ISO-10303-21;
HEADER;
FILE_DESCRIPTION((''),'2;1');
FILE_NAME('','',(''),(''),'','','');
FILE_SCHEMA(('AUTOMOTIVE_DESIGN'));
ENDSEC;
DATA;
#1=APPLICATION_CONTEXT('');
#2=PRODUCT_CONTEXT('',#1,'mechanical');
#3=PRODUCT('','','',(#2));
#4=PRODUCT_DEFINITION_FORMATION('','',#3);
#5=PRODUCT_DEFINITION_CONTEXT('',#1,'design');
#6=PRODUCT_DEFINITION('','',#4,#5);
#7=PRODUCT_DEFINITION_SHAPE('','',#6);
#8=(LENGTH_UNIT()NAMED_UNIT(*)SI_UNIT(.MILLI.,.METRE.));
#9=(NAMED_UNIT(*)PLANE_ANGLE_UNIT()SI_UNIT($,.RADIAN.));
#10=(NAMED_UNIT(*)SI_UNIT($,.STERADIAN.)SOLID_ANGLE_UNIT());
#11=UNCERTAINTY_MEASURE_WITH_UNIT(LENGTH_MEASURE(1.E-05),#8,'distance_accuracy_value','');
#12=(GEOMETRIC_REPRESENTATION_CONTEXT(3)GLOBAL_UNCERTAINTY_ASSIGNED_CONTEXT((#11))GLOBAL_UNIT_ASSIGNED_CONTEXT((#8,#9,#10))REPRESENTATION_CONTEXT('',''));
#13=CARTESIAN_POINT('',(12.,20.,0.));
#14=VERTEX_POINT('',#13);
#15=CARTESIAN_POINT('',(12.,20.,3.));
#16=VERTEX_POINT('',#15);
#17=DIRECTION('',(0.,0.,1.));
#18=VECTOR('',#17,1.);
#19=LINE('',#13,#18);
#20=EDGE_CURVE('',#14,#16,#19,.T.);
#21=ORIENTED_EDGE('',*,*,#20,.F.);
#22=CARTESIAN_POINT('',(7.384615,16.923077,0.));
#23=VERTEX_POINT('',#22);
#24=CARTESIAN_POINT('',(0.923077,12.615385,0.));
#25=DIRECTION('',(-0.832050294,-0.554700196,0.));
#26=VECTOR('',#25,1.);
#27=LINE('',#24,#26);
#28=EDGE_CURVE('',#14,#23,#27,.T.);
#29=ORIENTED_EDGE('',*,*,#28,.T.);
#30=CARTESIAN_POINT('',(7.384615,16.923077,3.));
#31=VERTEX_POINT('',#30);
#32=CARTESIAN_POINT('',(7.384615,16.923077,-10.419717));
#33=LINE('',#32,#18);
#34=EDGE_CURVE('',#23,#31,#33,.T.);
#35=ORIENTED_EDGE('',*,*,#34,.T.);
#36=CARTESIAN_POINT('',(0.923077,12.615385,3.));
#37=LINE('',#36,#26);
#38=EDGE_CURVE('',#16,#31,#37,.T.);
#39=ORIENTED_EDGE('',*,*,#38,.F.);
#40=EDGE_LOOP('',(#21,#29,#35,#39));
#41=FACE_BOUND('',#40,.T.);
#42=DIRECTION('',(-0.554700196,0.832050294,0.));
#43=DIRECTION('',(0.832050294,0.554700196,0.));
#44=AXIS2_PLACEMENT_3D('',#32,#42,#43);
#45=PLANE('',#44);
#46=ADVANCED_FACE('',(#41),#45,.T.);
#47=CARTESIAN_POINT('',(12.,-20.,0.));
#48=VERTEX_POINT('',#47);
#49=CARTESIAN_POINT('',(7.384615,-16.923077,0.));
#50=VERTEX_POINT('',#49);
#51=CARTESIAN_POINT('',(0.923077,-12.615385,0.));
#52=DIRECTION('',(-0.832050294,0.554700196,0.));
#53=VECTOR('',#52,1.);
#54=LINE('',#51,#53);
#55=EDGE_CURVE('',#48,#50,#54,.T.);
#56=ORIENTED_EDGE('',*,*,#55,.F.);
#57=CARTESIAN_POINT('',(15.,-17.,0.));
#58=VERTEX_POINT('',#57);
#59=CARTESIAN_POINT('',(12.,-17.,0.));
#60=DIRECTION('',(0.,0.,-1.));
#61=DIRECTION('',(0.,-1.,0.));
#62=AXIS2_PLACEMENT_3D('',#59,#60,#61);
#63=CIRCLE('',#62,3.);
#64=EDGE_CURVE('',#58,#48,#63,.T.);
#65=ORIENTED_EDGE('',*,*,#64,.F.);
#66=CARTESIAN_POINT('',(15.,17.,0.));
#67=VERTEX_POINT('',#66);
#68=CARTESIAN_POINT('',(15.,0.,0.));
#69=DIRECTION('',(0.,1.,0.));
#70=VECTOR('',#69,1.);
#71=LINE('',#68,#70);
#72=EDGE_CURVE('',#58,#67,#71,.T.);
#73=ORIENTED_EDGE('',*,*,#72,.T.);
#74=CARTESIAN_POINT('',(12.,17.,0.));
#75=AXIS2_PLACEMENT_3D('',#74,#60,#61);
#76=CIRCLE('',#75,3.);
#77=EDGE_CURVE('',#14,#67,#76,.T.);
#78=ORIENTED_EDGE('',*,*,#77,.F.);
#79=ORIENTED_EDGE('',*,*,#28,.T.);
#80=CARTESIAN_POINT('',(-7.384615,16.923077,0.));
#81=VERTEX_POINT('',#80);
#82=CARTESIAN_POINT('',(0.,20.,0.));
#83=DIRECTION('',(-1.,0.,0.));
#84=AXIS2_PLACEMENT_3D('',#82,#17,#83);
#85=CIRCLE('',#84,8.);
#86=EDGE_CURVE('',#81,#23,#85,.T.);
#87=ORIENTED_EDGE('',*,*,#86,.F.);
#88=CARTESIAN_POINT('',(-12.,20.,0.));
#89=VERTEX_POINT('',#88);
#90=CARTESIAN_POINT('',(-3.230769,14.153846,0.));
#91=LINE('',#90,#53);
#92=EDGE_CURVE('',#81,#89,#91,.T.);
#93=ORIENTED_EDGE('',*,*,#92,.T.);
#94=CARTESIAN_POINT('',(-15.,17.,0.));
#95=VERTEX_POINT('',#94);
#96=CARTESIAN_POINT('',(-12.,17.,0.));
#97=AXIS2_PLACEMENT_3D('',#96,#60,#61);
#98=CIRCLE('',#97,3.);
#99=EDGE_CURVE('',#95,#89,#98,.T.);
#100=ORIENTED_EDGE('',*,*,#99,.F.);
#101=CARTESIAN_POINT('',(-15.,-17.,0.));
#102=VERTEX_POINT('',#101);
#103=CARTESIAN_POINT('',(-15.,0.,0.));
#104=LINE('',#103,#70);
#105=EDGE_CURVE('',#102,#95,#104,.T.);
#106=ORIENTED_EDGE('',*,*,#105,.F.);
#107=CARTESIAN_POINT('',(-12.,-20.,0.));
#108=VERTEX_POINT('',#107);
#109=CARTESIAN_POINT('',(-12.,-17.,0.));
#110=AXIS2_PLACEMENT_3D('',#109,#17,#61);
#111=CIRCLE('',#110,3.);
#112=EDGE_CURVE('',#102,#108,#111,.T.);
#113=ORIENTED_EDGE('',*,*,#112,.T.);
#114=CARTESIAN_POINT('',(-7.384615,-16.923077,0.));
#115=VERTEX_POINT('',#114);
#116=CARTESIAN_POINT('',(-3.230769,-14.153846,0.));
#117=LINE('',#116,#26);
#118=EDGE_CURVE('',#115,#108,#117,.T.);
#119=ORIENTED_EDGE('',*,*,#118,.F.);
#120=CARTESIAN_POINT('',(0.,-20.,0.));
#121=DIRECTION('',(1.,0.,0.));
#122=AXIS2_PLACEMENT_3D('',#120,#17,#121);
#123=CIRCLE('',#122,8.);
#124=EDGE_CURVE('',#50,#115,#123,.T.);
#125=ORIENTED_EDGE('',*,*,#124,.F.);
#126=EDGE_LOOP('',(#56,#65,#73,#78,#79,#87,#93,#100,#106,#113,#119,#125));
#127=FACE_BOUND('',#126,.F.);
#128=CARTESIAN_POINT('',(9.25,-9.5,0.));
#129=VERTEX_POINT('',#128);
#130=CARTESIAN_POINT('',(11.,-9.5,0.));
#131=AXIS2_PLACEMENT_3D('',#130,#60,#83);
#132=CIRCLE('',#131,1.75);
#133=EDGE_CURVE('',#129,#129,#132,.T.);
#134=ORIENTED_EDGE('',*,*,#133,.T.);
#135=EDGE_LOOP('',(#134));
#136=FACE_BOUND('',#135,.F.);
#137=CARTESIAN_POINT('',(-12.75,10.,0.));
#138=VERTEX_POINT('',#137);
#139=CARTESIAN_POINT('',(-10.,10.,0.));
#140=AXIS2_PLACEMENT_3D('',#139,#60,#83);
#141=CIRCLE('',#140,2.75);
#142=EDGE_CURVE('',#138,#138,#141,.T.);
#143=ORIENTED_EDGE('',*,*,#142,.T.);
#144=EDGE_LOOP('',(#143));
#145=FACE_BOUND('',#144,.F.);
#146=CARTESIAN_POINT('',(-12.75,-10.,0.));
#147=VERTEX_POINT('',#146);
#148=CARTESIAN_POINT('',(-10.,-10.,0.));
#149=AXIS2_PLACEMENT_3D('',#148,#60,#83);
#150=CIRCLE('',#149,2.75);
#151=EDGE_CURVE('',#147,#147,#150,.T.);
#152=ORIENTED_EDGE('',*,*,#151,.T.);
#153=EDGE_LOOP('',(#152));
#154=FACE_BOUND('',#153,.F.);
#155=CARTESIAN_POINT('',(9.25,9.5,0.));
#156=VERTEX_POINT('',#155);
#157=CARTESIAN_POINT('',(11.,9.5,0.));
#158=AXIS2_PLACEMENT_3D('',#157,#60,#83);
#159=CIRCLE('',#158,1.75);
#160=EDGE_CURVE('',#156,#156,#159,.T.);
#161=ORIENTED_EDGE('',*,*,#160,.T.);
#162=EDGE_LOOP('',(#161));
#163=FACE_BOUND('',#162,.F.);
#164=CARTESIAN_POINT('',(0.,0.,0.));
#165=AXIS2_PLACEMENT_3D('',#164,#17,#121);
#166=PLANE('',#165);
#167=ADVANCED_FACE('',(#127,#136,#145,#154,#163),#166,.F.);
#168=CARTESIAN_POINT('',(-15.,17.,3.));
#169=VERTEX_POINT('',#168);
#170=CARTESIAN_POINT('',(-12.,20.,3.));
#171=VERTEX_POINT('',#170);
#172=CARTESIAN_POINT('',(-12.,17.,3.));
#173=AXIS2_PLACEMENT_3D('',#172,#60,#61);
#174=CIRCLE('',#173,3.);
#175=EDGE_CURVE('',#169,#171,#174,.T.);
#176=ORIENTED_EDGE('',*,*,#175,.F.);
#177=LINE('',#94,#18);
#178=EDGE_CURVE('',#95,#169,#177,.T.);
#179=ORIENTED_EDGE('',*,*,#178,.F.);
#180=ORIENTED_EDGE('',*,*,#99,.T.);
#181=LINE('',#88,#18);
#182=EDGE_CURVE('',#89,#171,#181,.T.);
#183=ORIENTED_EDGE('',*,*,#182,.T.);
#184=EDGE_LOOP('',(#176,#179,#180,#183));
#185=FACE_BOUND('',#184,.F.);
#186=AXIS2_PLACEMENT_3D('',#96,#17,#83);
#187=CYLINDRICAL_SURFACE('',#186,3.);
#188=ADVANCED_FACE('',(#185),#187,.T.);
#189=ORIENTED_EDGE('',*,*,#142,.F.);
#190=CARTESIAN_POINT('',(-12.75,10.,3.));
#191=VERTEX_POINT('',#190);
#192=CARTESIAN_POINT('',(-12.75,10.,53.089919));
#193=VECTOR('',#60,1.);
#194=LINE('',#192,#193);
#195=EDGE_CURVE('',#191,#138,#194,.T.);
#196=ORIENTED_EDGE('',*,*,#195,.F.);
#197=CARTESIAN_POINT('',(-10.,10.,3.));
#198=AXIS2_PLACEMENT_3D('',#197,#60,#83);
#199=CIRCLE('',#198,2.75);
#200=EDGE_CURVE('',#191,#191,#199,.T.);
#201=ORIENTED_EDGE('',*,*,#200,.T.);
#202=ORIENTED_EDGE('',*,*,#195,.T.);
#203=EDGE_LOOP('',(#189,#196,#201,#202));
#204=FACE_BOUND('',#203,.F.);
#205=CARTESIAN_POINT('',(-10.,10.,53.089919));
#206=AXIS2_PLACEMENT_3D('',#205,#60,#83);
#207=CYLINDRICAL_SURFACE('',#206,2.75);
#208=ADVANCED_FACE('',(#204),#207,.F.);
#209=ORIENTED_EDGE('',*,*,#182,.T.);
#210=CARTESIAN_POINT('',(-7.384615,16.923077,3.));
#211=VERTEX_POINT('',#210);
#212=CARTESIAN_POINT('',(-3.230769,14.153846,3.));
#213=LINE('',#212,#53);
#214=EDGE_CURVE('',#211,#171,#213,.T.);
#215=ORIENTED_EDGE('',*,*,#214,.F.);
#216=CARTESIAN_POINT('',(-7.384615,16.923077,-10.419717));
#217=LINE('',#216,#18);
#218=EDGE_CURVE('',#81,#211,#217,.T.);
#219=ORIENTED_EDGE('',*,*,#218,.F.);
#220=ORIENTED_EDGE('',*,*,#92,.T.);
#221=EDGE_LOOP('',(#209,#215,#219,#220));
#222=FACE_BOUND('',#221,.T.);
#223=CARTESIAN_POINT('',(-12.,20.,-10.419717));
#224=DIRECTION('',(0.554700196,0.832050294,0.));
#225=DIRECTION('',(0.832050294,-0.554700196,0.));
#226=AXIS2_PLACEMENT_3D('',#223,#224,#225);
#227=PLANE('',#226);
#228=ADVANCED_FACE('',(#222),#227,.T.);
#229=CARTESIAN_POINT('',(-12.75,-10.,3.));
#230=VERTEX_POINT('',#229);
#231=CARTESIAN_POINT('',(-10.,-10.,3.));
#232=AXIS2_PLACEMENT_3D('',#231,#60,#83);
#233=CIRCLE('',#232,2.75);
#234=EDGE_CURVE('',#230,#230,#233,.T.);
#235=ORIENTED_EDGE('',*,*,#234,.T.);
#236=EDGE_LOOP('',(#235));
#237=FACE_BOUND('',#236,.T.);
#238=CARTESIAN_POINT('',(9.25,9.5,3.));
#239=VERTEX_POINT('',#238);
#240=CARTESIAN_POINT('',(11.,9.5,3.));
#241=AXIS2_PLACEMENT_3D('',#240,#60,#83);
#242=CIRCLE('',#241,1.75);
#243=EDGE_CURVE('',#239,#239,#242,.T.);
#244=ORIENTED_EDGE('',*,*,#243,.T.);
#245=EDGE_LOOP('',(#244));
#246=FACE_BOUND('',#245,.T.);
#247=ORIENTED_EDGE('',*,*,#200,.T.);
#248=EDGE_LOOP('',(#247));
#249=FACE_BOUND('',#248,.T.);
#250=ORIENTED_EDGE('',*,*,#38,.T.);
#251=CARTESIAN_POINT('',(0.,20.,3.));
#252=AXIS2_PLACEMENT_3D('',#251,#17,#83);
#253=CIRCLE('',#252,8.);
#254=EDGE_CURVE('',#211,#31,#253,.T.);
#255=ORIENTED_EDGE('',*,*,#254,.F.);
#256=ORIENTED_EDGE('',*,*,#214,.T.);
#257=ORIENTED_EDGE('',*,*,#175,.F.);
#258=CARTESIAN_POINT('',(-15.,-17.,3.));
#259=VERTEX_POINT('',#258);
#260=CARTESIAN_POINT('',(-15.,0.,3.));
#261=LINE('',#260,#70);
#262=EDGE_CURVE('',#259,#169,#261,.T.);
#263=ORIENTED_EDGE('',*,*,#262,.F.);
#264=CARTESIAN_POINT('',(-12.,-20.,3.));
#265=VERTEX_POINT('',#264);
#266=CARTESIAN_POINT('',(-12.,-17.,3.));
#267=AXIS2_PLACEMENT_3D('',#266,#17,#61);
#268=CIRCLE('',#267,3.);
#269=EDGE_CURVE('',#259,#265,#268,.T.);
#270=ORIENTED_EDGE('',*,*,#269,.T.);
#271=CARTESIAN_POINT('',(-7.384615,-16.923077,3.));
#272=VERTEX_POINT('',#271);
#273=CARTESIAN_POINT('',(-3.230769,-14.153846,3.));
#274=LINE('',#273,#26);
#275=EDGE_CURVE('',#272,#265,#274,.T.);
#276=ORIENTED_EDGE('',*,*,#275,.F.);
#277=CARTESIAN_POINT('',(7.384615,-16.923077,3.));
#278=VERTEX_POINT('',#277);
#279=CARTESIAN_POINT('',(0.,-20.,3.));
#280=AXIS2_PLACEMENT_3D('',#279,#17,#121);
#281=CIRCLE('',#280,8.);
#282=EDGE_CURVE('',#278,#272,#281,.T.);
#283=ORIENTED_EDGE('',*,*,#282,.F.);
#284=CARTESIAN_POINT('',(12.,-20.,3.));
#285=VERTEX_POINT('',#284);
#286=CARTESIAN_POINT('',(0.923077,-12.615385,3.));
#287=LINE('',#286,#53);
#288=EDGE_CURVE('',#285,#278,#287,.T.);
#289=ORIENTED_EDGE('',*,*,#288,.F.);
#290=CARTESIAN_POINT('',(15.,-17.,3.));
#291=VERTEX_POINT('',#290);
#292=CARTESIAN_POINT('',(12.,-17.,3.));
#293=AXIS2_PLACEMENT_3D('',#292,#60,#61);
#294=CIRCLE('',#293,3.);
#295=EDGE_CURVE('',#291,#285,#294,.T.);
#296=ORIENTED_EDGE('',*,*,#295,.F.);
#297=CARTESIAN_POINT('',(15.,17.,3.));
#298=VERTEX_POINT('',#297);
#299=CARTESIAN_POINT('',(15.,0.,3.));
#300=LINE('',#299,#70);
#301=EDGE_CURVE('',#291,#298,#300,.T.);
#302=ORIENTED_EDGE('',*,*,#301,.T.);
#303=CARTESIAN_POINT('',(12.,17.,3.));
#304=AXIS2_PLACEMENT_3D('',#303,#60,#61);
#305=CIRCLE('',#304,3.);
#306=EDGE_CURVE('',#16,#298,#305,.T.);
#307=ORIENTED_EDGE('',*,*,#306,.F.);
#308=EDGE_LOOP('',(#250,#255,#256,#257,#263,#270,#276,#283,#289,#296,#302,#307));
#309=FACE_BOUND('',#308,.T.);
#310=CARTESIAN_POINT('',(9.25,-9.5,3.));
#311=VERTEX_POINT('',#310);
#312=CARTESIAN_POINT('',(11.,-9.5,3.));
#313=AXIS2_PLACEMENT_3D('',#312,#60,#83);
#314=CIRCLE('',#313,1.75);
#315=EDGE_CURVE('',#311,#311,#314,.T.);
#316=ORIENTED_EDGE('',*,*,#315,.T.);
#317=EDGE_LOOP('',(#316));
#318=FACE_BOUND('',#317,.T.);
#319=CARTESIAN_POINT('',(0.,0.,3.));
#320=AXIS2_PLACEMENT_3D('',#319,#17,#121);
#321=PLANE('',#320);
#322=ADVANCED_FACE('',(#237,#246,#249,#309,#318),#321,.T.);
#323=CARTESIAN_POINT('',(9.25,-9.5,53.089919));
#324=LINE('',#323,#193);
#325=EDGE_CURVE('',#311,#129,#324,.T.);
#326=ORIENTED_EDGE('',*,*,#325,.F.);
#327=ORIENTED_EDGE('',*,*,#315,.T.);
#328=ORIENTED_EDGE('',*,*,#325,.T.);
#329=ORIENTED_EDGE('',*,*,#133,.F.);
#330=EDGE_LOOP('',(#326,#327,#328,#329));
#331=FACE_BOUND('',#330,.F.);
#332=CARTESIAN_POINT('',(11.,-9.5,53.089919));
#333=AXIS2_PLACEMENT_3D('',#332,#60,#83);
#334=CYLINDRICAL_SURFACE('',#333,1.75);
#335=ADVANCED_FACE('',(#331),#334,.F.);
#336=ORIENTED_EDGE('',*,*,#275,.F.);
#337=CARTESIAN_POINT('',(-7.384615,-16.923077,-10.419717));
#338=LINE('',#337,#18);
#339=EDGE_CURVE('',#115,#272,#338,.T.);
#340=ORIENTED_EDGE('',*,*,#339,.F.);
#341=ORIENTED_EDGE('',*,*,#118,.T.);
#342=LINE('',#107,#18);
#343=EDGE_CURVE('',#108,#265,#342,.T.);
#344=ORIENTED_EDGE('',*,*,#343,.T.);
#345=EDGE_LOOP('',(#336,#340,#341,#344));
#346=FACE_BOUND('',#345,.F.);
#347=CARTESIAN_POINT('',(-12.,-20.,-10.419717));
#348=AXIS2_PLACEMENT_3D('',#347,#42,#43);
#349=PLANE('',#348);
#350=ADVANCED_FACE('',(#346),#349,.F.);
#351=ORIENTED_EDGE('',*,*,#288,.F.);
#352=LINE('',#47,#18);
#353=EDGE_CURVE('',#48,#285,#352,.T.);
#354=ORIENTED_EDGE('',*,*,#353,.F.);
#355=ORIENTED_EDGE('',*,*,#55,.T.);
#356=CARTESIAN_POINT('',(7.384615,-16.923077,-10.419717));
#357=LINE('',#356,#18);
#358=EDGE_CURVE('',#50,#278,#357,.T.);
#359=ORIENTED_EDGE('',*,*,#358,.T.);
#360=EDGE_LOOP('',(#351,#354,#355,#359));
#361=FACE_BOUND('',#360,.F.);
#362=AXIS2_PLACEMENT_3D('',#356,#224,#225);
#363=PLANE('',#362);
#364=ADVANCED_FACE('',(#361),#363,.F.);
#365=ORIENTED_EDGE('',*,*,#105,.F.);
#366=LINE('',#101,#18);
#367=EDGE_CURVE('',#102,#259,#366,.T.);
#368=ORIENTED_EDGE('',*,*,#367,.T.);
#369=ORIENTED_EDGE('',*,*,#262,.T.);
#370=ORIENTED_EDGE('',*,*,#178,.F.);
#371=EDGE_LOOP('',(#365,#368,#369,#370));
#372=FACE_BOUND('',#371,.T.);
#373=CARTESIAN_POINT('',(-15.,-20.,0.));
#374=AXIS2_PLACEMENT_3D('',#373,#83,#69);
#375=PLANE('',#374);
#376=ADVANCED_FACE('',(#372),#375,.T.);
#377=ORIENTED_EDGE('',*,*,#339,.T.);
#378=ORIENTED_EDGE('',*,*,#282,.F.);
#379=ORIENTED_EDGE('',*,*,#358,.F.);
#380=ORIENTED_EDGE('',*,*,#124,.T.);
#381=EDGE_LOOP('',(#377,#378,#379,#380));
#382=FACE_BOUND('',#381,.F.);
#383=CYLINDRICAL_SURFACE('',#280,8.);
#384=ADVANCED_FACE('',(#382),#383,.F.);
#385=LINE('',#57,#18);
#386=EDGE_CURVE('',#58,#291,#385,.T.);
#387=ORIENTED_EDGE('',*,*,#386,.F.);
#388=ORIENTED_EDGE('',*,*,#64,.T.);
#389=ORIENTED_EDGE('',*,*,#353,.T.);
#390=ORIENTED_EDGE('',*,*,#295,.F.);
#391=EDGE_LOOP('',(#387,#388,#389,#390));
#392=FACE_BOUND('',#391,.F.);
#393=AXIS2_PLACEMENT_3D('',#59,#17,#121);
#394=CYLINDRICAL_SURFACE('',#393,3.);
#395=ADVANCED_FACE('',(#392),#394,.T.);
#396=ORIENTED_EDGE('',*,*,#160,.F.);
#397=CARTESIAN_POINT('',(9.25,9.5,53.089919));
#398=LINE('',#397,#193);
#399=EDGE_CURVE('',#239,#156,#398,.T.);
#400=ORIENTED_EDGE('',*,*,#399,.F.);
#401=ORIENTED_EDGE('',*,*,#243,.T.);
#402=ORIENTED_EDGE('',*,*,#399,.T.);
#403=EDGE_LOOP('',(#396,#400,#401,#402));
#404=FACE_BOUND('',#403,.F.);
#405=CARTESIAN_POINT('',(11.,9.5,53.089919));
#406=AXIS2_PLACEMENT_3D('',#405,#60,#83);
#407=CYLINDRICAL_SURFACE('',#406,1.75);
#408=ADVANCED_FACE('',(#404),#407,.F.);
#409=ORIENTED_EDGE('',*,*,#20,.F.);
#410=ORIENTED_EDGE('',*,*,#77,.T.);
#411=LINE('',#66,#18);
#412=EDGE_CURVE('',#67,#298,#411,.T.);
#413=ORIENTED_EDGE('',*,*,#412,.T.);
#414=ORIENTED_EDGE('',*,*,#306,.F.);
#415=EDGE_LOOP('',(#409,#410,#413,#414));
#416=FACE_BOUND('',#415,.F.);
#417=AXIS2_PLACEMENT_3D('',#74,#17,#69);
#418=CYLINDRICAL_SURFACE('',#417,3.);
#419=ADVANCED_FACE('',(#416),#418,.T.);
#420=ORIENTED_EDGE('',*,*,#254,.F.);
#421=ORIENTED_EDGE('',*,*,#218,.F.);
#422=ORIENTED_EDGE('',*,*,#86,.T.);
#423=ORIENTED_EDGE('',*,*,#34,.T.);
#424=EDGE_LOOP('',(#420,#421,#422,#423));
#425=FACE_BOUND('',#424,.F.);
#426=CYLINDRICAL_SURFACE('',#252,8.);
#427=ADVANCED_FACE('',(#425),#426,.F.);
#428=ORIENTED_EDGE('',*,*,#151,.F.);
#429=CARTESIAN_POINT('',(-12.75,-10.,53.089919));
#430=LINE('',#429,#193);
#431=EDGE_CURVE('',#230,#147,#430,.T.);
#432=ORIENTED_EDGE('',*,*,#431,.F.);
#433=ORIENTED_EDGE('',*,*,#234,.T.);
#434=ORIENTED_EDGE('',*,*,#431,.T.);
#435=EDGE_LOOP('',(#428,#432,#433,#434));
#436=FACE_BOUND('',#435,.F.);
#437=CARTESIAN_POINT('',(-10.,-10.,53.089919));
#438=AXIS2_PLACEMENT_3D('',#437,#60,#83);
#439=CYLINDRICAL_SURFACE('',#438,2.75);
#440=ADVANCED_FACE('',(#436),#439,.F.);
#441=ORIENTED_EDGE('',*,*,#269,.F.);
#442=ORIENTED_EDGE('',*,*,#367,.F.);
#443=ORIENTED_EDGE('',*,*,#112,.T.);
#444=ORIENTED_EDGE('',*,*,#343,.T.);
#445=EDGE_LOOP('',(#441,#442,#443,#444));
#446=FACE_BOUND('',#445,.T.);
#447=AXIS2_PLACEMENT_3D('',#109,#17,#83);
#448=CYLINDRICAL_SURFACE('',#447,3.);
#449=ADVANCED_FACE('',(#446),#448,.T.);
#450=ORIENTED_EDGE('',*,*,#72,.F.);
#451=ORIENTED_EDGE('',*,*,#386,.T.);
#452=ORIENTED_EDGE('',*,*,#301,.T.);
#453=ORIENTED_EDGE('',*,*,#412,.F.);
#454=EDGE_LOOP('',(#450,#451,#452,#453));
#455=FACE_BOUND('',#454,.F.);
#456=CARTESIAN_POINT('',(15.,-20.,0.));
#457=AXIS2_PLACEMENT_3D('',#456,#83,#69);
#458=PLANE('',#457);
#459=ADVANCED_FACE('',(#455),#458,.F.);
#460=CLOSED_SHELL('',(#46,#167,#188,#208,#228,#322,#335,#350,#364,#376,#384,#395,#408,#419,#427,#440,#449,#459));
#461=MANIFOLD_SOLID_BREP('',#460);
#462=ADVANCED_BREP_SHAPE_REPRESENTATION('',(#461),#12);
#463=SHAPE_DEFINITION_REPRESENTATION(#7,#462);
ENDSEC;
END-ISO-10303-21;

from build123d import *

# Parameters (mm, degrees)
F5_W        = 30
F5_H        = 40
F6_DEPTH    = 3
F8_D        = 5.5
F9_D        = 3.5
F1_DEPTH    = 25
F2_R        = 3
F3_T1_DEPTH = 23.839434056
F4_T1_DEPTH = 23.839434056


# Not quite as in the source:
# - a fillet or chamfer that OpenCascade refuses, or shapes differently, is made with other operations: its cross-section is extruded or revolved along the edge and cut away or added


with BuildPart() as f6:
    # F5 (on Top) → F6 (new body)
    with BuildSketch(Plane.XY):
        Rectangle(F5_W, F5_H)
    extrude(amount=F6_DEPTH)

    # F8 (through all)
    with Locations(Plane.XY.offset(3)):
        with Locations((-10, 10), (-10, -10)):
            Hole(F8_D / 2)

    # F9 (through all)
    with Locations(Plane.XY.offset(3)):
        with Locations((11, 9.5), (11, -9.5)):
            Hole(F9_D / 2)

    # F0 (on face) → F1 (cut)
    with BuildSketch(Plane.XY.offset(3)):
        with BuildLine():
            Line((-8, -20), (8, -20))
            ThreePointArc((8, -20), (0, -12), (-8, -20))
        make_face()
        with BuildLine():
            ThreePointArc((-8, 20), (0, 12), (8, 20))
            Line((8, 20), (-8, 20))
        make_face()
    extrude(amount=-F1_DEPTH, mode=Mode.SUBTRACT)

    # F2
    f2_edges = [f6.edges().sort_by_distance(p)[0] for p in [
        (15, -20, 1.5),
        (-15, -20, 1.5),
        (15, 20, 1.5),
        (-15, 20, 1.5),
    ]]
    fillet(f2_edges, radius=F2_R)

    # F3: chamfer of 5 on 2 edges, made by hand

    # F3_s2 → F3_t1 (cut)
    with BuildSketch(Plane.XY.offset(-10.419717028)):
        with BuildLine():
            Line((-12, 20), (-7.3846153846, 16.9230769231))
            ThreePointArc((-7.3846153846, 16.9230769231), (-7.8300507328, 18.3597849159), (-8, 20))
            Line((-8, 20), (-12, 20))
        make_face()
        with BuildLine():
            Line((7.3846153846, 16.9230769231), (12, 20))
            Line((12, 20), (8, 20))
            ThreePointArc((8, 20), (7.8300507328, 18.3597849159), (7.3846153846, 16.9230769231))
        make_face()
    extrude(amount=F3_T1_DEPTH, mode=Mode.SUBTRACT)

    # F4: chamfer of 5 on 2 edges, made by hand

    # F4_s2 → F4_t1 (cut)
    with BuildSketch(Plane.XY.offset(-10.419717028)):
        with BuildLine():
            Line((7.3846153846, -16.9230769231), (12, -20))
            Line((12, -20), (8, -20))
            ThreePointArc((8, -20), (7.8300507328, -18.3597849159), (7.3846153846, -16.9230769231))
        make_face()
        with BuildLine():
            Line((-12, -20), (-7.3846153846, -16.9230769231))
            ThreePointArc((-7.3846153846, -16.9230769231), (-7.8300507328, -18.3597849159), (-8, -20))
            Line((-8, -20), (-12, -20))
        make_face()
    extrude(amount=F4_T1_DEPTH, mode=Mode.SUBTRACT)


solid = f6.part
